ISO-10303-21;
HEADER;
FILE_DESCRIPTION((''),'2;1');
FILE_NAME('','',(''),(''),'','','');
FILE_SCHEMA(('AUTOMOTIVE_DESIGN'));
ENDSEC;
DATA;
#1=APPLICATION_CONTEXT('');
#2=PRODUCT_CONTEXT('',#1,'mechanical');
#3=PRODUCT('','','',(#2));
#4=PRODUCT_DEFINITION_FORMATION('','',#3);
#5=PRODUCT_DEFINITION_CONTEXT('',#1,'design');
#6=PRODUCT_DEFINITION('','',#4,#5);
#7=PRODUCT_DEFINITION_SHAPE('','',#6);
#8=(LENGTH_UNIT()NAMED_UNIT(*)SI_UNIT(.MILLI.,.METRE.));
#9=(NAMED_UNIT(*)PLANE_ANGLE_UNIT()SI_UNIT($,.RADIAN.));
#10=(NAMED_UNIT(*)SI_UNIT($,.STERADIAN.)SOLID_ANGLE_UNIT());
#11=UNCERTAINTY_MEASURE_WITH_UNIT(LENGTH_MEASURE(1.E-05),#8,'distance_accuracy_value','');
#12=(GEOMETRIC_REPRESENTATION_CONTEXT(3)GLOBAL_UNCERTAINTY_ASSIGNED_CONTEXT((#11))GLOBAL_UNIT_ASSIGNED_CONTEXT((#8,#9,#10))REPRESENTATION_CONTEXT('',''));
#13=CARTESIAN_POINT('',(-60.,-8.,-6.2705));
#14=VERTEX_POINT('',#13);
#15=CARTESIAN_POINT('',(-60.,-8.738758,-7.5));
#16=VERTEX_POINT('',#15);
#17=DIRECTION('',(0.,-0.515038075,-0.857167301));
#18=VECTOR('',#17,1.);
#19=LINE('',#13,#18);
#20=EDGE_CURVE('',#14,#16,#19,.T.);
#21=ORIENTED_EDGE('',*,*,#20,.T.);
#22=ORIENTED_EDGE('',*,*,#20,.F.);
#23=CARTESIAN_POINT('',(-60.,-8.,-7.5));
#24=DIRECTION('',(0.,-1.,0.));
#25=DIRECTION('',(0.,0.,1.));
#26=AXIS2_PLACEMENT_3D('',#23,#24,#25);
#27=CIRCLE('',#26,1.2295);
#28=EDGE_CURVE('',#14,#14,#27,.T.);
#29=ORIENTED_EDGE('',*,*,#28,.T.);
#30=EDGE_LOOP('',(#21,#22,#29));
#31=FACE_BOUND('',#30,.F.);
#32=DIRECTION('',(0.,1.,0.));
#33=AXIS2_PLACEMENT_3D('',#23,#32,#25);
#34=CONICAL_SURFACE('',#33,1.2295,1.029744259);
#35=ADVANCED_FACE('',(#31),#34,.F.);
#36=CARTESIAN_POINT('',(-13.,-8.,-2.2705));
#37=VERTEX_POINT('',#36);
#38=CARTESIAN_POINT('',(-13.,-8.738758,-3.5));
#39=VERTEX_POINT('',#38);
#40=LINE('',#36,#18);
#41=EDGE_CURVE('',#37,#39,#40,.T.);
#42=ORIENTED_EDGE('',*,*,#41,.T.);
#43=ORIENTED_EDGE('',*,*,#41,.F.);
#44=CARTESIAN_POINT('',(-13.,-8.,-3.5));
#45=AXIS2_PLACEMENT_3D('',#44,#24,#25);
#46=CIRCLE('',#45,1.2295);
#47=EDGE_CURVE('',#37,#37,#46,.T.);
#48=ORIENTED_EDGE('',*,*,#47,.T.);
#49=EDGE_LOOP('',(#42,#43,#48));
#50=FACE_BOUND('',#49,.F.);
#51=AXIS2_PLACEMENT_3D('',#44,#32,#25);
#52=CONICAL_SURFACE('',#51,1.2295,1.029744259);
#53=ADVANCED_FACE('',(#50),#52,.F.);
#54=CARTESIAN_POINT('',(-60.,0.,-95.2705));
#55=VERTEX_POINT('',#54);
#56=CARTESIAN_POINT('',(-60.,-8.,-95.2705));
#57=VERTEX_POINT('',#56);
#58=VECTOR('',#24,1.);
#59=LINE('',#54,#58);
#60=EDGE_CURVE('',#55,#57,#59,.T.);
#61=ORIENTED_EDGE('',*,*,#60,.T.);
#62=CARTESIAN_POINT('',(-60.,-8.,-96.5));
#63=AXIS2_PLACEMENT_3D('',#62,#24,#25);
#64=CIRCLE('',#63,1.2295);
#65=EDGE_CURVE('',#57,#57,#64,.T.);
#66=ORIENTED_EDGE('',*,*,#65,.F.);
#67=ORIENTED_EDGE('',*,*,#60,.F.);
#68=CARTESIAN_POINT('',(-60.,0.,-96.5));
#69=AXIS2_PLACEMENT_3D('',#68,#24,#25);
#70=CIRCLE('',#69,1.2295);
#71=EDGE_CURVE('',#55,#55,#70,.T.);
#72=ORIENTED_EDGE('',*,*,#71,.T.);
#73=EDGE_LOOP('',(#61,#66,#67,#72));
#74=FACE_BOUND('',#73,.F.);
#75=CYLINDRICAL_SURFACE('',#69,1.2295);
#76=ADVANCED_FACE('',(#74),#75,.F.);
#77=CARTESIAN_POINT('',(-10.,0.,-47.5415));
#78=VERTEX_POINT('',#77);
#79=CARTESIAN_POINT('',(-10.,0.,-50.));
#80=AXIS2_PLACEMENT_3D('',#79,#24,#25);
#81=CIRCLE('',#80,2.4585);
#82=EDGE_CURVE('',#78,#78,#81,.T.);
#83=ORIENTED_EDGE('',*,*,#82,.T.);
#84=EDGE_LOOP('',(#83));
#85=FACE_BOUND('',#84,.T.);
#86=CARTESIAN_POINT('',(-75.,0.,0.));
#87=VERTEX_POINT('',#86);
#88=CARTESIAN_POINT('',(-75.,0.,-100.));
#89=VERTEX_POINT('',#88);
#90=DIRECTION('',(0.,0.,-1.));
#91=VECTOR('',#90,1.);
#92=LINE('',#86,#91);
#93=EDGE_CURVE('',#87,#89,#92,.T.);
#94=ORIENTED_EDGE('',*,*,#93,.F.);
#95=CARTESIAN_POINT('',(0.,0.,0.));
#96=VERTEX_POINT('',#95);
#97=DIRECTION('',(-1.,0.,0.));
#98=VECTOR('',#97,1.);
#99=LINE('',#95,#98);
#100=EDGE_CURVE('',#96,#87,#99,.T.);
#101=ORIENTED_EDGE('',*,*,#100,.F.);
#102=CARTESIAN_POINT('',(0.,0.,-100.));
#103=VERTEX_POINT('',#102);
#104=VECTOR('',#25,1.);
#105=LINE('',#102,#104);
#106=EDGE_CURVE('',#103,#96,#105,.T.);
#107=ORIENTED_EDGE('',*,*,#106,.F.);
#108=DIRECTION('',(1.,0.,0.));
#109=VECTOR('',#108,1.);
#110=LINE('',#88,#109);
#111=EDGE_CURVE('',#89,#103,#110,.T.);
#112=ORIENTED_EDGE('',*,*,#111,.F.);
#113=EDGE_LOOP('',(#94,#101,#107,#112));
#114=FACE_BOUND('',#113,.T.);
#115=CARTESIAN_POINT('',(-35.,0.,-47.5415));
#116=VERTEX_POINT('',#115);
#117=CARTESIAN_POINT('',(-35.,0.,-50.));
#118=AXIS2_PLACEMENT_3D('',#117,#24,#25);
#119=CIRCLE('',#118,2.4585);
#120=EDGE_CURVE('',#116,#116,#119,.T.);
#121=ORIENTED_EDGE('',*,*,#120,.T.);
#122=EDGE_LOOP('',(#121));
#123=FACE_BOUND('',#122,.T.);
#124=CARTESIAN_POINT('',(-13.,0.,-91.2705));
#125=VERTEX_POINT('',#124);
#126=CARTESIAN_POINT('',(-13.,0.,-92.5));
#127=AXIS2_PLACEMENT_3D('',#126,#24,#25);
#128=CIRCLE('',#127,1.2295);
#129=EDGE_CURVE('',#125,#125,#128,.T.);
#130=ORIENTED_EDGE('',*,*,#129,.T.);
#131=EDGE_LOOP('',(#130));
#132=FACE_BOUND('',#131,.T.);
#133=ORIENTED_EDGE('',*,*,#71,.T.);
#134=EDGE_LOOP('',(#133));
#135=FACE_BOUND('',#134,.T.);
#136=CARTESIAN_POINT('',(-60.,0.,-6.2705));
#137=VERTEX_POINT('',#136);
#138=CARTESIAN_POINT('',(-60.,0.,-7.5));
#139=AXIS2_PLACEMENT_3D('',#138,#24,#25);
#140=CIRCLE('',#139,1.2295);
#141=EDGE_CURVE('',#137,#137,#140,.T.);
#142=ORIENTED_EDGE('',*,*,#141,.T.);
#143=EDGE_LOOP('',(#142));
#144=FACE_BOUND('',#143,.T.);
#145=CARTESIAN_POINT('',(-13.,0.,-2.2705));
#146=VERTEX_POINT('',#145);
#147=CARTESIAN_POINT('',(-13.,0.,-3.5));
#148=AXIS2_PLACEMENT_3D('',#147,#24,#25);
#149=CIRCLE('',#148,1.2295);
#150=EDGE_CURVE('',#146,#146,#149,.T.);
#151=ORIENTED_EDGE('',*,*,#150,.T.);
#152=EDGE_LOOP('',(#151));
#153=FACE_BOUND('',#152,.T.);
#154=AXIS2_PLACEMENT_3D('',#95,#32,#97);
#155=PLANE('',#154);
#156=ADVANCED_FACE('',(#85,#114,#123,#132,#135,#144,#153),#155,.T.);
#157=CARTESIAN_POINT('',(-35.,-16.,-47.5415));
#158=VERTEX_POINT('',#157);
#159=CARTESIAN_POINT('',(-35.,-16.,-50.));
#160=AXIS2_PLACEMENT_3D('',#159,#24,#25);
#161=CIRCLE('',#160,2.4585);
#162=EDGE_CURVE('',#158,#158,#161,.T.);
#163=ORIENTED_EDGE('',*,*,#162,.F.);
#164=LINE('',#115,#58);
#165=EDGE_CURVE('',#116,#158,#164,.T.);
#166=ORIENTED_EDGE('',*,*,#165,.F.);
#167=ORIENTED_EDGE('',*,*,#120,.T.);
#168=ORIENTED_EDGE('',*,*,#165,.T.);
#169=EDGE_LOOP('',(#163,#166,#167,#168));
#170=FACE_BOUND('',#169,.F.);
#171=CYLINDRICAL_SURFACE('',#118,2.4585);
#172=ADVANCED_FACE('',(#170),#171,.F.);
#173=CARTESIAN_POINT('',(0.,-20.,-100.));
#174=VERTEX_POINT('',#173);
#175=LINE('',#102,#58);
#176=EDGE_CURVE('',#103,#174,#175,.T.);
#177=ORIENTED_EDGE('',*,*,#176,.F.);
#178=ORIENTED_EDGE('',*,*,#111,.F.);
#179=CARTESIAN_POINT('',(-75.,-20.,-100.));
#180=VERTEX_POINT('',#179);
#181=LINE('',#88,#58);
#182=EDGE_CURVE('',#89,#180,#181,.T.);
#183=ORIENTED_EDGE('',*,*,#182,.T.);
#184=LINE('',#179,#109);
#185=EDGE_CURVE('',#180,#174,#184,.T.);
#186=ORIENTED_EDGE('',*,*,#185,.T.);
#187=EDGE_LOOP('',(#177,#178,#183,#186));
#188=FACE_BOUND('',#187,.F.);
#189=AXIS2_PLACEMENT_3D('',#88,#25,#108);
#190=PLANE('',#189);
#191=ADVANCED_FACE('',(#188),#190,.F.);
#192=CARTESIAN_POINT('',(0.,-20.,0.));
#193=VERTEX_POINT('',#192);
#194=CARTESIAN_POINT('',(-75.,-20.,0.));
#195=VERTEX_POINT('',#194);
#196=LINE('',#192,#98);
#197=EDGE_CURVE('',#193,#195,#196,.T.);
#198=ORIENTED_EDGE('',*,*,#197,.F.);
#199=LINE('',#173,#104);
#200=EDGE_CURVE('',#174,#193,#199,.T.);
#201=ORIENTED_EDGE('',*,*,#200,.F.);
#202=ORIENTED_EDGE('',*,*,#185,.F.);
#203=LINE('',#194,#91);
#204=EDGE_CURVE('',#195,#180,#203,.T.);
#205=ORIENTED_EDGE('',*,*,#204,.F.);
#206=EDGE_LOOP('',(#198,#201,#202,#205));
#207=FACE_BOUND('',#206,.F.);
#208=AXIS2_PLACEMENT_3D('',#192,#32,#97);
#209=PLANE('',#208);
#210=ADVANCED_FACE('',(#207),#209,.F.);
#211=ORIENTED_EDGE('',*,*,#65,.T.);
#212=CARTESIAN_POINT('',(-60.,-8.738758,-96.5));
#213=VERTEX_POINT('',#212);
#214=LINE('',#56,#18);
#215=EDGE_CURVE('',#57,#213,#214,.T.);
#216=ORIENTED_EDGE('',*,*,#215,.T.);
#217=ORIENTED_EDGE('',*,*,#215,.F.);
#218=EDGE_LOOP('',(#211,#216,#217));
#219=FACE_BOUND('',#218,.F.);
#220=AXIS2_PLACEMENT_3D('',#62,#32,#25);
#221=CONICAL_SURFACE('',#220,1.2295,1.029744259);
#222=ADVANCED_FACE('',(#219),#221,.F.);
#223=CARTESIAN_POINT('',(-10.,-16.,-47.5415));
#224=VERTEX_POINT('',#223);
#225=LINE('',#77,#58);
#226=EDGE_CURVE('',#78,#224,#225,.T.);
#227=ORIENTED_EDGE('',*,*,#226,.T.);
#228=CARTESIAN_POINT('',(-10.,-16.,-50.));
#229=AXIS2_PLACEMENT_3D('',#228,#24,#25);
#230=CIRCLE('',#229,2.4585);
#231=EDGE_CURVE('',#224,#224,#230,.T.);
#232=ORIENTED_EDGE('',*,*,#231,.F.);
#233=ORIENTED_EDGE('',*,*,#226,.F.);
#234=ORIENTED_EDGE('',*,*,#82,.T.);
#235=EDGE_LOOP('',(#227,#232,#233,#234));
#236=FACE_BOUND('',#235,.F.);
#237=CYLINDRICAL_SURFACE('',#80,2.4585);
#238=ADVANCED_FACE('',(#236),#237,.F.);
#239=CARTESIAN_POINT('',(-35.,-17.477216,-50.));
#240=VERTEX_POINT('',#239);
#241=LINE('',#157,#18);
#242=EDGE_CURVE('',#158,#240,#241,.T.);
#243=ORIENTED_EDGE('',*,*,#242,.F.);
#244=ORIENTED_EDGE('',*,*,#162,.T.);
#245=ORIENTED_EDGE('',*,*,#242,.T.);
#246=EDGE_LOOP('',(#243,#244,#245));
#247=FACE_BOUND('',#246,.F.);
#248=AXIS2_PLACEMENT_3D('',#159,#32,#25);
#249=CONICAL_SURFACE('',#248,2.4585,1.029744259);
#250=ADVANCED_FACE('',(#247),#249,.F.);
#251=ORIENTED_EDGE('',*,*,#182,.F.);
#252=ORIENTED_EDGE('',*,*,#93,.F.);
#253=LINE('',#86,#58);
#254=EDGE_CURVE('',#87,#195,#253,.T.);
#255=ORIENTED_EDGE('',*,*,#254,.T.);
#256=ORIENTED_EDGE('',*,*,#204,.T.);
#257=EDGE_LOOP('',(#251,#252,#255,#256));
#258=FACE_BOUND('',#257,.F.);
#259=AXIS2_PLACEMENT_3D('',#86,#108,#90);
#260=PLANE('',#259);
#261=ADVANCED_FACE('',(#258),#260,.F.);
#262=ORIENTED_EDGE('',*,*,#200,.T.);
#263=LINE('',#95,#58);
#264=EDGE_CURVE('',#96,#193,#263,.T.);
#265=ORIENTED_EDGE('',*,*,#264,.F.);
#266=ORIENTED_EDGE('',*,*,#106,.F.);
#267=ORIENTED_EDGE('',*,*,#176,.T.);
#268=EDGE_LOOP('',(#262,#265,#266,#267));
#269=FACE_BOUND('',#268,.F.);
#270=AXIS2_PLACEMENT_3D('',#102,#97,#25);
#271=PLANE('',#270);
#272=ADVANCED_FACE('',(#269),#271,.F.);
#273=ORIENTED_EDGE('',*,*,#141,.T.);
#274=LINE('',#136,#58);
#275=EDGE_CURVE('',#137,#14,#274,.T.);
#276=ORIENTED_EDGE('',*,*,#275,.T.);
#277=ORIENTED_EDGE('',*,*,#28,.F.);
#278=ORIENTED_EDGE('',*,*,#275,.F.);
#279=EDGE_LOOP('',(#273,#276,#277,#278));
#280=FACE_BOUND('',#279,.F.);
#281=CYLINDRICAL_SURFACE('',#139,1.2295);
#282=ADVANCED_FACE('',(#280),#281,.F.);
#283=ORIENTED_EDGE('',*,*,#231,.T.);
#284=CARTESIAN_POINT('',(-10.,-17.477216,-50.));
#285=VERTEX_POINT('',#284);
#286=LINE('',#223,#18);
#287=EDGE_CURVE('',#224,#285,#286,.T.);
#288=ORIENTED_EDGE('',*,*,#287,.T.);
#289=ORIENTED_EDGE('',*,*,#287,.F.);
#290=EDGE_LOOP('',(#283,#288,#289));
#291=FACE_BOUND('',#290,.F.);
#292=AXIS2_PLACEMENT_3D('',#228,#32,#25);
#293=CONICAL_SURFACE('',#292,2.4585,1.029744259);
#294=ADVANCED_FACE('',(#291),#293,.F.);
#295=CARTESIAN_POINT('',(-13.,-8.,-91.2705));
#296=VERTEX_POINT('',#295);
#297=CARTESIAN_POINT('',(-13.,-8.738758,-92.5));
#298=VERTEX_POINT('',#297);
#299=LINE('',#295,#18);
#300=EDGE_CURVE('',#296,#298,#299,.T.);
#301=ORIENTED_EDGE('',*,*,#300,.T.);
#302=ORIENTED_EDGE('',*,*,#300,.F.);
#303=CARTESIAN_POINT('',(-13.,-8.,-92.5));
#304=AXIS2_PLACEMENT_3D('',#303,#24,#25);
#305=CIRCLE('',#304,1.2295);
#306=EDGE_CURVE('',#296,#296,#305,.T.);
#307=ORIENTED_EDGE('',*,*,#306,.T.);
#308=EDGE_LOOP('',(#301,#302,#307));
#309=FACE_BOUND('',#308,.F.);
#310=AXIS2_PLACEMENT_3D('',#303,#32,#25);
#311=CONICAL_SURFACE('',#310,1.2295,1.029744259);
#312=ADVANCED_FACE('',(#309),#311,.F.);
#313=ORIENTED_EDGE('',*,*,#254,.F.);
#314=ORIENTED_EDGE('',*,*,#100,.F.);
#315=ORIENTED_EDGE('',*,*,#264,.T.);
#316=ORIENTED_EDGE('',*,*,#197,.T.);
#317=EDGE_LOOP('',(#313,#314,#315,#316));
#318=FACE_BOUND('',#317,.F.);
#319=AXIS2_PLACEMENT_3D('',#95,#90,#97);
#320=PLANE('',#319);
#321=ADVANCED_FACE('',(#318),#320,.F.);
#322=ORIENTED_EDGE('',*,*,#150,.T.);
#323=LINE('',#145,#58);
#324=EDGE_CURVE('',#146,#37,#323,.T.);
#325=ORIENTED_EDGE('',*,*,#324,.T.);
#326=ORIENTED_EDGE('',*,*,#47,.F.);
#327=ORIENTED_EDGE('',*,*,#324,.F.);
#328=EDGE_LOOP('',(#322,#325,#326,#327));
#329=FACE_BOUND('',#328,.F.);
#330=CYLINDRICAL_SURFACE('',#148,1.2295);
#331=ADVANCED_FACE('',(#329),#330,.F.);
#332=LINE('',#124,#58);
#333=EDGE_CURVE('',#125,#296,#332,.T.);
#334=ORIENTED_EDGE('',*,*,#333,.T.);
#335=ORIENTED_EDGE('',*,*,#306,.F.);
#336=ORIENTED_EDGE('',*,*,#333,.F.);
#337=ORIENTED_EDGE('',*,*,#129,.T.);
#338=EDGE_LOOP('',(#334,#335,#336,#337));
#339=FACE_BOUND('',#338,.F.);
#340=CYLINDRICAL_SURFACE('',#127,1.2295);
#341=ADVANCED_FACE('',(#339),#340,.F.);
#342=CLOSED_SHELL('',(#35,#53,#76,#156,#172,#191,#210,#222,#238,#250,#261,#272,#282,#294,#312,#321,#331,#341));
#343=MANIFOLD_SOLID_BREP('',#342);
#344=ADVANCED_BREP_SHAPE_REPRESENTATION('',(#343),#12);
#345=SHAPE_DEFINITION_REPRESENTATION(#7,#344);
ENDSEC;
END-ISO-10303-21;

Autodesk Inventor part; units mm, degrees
ref_plane "YZ Plane" through (0, 0, 0) normal (1, 0, 0) x (0, 1, 0)
ref_plane "XZ Plane" through (0, 0, 0) normal (0, 1, 0) x (-1, 0, 0)
ref_plane "XY Plane" through (0, 0, 0) normal (0, 0, 1) x (1, 0, 0)
sketch "Sketch1" plane through (0, 0, 0) normal (0, 1, 0) x (-1, 0, 0)
  line L0 (0, 0) -> (75, 0)
  line L1 (75, 0) -> (75, -100)
  line L2 (75, -100) -> (0, -100)
  line L3 (0, -100) -> (0, 0)
  point P0 (60, -7.5)
  point P1 (13, -3.5)
  point P2 (60, -96.5)
  point P3 (13, -92.5)
  point P4 (35, -50)
  point P5 (10, -50)
  point P6 (0, -50)
  dimension "d0" = 75
  dimension "d1" = 100
  dimension "d2" = 7.5
  dimension "d3" = 3.5
  dimension "d4" = 3.5
  dimension "d5" = 7.5
  dimension "d6" = 47
  dimension "d7" = 47
  dimension "d8" = 15
  dimension "d9" = 15
  dimension "d10" = 25
  dimension "d11" = 10
extrude "Extrusion1" add sketch "Sketch1" against normal blind 20
hole "Hole1" at (-13, 0, -3.5) at (-60, 0, -7.5) at (-13, 0, -92.5) at (-60, 0, -96.5) direction (0, -1, 0) diameter 2.459 depth 8 tip angle 118 thread size "M3x0.5" class "6H" standard "ISO Metric profile"
hole "Hole2" at (-35, 0, -50) at (-10, 0, -50) direction (0, -1, 0) diameter 4.917 depth 16 tip angle 118 thread size "M6x1" class "6H" standard "ISO Metric profile"
properties part number "2x-servo-boards-QS-series"
